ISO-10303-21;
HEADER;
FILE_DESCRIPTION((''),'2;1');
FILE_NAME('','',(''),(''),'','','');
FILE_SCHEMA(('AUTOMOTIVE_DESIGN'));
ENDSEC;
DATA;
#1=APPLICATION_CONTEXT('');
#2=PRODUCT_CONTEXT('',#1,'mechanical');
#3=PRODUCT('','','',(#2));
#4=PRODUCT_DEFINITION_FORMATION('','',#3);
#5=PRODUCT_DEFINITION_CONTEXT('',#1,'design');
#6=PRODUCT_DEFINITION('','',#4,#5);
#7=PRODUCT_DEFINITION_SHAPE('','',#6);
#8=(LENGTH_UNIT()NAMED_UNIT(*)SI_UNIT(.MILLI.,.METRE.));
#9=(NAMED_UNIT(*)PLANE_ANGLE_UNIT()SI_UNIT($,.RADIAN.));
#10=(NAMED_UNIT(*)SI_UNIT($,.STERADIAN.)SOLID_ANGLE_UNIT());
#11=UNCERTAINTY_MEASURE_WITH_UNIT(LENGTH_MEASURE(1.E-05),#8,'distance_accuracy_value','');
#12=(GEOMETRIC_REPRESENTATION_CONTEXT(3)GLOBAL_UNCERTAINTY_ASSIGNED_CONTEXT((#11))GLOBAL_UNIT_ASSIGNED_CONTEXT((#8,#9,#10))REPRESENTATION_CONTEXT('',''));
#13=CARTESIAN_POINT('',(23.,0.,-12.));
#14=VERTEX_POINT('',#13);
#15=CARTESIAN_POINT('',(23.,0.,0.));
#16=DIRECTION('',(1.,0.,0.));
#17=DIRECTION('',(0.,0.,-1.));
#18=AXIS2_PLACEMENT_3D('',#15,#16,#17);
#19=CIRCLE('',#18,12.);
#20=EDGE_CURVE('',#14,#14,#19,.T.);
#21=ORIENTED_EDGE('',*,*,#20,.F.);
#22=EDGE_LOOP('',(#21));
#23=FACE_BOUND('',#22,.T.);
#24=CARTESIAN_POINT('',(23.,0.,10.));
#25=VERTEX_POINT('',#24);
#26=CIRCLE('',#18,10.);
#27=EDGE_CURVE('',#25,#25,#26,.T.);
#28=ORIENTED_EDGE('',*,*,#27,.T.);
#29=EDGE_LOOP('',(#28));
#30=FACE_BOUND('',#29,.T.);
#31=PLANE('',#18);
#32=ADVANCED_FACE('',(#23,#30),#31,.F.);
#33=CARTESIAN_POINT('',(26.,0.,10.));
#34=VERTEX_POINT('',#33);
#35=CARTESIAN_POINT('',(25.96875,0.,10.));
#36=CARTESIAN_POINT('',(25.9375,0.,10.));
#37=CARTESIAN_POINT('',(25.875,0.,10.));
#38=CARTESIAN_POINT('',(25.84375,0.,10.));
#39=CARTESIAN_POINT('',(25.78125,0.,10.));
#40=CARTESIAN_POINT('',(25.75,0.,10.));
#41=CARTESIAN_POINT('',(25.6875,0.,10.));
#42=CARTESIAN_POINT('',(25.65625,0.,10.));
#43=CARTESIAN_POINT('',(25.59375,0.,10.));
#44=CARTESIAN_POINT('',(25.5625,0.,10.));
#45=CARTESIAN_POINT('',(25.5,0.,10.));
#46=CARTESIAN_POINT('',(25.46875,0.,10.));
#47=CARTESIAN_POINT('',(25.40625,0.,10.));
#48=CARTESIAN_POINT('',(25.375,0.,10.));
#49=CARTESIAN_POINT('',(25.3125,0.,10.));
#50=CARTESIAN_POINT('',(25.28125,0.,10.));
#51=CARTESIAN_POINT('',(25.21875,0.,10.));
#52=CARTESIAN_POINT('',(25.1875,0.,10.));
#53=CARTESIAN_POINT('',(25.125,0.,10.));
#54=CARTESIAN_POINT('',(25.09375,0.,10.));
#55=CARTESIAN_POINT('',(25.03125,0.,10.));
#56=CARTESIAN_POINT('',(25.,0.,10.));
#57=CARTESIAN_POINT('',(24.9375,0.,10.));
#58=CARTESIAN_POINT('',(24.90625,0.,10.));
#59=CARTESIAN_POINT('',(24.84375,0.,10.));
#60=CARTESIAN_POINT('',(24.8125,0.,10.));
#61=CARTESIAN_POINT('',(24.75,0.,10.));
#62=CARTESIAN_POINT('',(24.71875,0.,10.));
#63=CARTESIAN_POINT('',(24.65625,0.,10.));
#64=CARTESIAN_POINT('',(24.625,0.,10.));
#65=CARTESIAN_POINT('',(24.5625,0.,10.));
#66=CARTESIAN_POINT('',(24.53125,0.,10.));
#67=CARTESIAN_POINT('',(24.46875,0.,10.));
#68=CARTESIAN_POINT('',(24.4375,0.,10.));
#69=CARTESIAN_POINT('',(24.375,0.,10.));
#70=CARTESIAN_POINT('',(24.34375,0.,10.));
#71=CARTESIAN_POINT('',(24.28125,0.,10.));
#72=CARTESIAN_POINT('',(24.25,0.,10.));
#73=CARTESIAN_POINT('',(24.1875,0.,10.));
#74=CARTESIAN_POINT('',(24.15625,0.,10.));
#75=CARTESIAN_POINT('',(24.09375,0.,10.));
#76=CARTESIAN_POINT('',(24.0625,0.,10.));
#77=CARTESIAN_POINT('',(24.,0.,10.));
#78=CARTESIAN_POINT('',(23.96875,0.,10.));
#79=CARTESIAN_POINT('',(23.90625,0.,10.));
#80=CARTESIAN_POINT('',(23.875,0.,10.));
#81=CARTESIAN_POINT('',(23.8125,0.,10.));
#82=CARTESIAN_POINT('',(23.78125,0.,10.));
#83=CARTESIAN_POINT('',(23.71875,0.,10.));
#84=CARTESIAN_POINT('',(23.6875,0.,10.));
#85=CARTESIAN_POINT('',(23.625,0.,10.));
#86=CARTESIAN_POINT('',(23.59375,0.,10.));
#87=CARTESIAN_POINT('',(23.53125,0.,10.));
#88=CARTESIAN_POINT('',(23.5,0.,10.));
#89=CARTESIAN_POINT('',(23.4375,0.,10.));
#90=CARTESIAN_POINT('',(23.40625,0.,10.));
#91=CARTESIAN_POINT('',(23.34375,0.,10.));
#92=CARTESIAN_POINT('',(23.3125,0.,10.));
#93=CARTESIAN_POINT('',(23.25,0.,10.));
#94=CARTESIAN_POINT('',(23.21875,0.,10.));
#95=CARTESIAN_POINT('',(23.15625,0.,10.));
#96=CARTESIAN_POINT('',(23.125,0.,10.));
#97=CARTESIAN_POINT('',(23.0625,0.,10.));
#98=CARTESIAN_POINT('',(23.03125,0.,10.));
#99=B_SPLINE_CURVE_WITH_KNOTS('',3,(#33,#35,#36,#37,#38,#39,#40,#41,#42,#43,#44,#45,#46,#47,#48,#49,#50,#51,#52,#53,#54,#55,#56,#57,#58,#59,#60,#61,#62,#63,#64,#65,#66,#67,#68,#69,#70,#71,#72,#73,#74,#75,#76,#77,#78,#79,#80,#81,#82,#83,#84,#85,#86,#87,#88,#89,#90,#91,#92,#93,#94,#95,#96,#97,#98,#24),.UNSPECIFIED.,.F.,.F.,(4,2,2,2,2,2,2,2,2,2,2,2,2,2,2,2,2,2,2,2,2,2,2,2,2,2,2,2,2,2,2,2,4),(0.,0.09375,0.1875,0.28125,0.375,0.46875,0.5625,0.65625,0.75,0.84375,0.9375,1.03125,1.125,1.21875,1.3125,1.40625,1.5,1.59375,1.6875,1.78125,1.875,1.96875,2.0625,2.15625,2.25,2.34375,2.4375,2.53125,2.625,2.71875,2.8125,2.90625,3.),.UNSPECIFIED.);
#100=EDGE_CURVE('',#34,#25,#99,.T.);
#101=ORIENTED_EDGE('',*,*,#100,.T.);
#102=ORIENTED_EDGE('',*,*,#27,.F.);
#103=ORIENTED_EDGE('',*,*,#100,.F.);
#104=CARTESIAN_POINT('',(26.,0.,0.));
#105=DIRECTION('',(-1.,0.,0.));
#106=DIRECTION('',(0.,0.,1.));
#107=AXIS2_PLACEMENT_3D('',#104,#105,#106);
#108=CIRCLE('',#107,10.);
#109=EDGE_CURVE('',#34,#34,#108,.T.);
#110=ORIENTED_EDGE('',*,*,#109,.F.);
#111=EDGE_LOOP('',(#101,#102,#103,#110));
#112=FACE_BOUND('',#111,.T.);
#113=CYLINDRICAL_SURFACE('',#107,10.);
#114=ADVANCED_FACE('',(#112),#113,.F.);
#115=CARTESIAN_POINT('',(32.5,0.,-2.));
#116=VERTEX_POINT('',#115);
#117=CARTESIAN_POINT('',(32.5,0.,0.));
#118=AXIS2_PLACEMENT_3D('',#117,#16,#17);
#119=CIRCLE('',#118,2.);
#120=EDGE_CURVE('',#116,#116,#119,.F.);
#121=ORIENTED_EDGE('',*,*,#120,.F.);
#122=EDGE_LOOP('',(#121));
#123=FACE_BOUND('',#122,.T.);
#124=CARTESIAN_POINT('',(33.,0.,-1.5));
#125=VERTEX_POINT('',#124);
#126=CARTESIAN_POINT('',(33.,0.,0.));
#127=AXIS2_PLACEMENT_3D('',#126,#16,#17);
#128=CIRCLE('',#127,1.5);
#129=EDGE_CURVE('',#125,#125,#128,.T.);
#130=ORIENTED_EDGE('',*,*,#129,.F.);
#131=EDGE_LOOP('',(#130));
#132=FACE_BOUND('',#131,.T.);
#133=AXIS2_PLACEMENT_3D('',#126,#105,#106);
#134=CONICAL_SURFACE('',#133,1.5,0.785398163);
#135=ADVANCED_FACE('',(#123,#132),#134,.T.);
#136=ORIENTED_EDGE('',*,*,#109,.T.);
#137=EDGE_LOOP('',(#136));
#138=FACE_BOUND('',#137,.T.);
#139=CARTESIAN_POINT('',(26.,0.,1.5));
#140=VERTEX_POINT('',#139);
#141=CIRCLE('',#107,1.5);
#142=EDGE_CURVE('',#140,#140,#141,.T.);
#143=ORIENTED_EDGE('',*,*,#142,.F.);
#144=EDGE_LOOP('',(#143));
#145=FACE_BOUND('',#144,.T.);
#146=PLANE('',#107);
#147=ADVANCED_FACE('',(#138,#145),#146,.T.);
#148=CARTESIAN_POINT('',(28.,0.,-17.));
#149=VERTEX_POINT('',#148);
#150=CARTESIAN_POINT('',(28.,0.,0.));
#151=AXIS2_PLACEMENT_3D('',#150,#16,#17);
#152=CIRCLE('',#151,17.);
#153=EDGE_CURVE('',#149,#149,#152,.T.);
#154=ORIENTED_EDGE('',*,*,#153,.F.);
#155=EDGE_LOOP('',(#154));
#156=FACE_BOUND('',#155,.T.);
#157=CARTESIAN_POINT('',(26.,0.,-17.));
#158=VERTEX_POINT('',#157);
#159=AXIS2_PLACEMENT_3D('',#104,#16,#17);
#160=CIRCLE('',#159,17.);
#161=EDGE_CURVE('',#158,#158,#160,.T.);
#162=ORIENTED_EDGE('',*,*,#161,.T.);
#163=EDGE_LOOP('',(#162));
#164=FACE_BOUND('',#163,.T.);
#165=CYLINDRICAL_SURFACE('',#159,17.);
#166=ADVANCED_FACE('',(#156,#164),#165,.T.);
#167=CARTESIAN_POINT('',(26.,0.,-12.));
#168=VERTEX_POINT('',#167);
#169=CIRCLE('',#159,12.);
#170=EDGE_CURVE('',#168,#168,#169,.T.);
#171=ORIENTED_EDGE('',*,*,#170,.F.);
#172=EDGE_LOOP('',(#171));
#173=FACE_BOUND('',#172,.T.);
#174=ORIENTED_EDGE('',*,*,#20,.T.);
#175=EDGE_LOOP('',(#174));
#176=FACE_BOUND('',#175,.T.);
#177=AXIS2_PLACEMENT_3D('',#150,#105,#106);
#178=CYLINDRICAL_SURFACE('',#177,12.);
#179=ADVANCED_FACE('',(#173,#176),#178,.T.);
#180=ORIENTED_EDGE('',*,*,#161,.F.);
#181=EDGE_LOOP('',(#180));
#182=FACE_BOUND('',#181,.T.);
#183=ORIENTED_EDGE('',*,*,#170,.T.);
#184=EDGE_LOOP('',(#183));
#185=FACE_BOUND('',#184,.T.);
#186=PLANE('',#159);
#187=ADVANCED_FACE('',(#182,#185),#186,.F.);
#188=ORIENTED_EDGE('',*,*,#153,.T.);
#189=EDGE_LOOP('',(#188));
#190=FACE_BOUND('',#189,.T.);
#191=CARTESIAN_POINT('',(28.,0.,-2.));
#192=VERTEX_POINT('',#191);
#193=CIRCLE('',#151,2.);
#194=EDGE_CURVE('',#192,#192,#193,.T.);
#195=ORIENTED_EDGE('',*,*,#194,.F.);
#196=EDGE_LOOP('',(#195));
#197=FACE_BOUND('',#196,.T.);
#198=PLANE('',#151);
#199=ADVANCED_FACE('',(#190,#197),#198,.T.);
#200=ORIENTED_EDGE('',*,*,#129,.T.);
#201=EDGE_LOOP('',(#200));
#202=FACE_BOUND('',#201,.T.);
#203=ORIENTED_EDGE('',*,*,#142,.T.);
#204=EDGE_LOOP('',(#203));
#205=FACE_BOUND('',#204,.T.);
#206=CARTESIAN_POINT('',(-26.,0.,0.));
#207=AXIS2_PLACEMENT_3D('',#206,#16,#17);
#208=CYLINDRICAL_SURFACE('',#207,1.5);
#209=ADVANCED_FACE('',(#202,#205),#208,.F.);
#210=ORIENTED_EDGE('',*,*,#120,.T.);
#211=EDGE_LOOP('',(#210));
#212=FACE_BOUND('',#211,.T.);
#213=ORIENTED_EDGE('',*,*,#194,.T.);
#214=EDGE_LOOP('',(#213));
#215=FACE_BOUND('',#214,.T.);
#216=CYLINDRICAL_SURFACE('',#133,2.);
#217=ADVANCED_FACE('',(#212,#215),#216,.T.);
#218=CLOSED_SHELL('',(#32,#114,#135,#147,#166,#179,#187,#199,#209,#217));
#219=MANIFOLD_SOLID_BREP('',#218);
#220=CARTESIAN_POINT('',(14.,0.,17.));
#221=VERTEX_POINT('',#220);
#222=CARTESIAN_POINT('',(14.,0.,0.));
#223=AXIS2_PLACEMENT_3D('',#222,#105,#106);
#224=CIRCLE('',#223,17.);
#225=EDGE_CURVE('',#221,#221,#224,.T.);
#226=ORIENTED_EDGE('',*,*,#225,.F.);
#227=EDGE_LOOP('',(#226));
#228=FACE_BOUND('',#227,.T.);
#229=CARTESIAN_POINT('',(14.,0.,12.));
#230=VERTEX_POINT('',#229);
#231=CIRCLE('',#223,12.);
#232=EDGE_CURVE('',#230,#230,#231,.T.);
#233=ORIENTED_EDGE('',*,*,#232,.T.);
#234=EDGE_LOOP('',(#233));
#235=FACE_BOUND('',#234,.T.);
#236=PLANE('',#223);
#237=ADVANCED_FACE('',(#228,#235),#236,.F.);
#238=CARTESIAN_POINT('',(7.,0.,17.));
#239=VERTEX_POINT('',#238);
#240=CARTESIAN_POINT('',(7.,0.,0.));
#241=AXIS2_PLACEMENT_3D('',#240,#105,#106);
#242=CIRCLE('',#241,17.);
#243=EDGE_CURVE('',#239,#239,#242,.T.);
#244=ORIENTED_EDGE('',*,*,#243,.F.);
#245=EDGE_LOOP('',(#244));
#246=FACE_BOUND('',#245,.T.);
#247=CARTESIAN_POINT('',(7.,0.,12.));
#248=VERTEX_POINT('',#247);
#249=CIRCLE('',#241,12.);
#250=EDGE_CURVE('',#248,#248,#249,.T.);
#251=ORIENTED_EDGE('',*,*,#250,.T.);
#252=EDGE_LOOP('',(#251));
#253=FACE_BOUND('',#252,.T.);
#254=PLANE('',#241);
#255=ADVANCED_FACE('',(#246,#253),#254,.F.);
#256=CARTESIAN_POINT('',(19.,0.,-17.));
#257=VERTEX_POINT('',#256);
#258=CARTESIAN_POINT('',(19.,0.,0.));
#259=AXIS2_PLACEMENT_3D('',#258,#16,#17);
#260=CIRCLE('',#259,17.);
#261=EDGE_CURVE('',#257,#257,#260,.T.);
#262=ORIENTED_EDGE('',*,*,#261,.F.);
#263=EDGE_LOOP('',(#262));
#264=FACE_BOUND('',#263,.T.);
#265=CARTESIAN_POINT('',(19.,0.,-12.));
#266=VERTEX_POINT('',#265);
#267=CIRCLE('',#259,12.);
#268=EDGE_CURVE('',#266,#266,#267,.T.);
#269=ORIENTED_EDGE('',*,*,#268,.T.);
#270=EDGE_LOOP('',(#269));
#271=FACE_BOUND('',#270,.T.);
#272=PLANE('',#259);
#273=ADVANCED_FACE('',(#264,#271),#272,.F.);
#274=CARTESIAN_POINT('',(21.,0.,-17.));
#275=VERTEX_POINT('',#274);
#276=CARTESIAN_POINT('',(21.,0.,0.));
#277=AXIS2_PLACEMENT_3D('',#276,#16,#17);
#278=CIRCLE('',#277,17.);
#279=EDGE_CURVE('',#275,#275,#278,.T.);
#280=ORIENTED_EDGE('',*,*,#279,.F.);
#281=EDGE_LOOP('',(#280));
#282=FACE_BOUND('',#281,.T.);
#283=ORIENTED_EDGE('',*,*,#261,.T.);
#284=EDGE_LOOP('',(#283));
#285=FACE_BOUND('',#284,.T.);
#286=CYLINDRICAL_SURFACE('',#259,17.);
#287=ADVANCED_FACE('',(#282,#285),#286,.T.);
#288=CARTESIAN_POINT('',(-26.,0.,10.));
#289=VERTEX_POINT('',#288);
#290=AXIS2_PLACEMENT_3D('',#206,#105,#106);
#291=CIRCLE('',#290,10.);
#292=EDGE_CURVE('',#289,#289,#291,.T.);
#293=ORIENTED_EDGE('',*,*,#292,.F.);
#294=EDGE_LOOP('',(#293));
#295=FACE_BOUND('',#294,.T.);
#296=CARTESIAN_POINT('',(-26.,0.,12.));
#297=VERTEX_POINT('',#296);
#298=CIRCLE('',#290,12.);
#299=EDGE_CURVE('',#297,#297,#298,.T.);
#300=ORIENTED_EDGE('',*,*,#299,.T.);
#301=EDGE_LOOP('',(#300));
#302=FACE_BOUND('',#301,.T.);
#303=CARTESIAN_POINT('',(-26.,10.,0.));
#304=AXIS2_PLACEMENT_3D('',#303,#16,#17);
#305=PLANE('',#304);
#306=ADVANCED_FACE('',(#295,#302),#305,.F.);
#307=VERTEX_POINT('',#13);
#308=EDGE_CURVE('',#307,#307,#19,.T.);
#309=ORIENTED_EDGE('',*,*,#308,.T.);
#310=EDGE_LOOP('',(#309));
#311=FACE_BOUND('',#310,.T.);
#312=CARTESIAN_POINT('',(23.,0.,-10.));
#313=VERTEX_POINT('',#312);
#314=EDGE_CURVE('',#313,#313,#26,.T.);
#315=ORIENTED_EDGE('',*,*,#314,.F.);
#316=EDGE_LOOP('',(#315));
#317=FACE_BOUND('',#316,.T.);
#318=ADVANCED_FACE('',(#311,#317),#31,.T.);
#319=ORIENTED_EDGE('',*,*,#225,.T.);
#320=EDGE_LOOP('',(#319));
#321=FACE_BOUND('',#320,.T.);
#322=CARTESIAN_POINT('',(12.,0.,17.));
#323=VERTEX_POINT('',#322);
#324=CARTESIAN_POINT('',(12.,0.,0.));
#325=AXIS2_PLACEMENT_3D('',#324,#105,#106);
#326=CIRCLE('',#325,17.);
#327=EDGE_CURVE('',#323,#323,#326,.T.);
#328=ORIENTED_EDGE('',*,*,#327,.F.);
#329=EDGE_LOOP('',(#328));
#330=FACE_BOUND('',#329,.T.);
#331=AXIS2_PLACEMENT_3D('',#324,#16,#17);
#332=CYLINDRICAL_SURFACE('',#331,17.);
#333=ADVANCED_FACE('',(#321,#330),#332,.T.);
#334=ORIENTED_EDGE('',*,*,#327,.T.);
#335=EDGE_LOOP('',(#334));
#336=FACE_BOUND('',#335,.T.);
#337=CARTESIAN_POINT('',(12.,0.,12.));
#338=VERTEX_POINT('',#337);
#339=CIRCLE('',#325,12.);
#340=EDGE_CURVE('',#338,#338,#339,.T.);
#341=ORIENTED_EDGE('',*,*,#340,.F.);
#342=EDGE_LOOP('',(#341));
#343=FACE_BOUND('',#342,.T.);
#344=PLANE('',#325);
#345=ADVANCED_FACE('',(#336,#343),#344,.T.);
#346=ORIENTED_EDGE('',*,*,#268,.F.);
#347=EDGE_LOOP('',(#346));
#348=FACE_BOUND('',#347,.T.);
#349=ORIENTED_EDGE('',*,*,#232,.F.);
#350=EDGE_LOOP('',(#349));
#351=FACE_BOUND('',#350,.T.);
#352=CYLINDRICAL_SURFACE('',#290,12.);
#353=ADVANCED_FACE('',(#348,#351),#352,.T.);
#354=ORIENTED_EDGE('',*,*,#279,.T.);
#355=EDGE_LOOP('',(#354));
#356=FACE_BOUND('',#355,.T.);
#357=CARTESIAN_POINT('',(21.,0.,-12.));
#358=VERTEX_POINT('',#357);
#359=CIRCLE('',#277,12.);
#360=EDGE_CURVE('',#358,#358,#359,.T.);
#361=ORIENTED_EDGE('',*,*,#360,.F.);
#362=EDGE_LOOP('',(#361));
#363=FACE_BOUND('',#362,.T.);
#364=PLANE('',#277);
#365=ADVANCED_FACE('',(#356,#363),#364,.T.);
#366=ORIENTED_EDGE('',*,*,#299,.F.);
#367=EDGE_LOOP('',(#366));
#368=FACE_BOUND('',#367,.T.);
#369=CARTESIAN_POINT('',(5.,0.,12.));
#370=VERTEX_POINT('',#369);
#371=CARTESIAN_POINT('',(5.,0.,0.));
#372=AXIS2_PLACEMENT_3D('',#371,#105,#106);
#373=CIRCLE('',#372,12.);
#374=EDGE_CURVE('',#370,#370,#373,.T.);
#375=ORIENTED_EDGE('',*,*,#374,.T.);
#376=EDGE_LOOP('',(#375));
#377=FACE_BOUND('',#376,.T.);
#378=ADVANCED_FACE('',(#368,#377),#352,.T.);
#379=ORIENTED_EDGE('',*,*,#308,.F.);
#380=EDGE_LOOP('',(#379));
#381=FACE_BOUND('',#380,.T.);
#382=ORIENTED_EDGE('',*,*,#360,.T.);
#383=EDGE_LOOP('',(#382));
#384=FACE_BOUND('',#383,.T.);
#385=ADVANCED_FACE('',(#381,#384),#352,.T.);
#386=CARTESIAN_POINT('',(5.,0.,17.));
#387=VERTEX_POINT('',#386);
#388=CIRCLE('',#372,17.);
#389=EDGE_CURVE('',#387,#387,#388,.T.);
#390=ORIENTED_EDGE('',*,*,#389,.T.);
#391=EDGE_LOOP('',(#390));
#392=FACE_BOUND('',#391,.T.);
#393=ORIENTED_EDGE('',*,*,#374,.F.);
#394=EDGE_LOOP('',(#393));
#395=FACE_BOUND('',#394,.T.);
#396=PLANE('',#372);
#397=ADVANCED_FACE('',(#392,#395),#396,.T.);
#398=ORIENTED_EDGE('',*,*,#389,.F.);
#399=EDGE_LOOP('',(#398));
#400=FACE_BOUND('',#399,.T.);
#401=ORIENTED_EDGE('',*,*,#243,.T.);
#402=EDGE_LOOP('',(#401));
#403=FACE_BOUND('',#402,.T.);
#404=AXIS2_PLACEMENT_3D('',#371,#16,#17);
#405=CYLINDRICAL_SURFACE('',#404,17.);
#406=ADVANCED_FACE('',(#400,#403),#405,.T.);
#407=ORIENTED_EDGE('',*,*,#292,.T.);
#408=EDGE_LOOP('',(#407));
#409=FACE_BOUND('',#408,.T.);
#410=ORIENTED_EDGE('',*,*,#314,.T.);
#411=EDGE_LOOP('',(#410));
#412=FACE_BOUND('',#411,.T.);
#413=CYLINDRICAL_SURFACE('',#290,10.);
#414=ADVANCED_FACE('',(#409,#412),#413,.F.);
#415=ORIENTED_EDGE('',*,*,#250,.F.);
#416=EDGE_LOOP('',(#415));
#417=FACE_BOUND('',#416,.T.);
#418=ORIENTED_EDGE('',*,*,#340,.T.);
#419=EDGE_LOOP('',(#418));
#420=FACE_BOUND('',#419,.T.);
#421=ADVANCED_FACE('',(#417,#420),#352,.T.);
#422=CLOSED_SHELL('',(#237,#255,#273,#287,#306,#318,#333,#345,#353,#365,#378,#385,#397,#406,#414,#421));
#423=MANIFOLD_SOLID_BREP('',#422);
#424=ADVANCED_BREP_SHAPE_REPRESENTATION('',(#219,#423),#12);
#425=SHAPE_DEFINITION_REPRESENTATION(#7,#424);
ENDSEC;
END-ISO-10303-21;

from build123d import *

# Parameters (mm, degrees)
SKETCH_1_W          = 46
SKETCH_1_H          = 2
SKETCH_8_R          = 12
SKETCH_8_R_2        = 10
EXTRUDE_3_DEPTH     = 3
SKETCH_9_R          = 12
EXTRUDE_5_DEPTH     = 5
SKETCH_11_R         = 10
CUT_EXTRUDE_7_DEPTH = 52
SKETCH_12_R         = 1.5
CUT_EXTRUDE_8_DEPTH = 57.603886792
EXTRUDE_START       = -2
SKETCH_14_R         = 17
SKETCH_14_R_2       = 12
EXTRUDE_6_DEPTH     = 2
EXTRUDE_START_2     = -9
SKETCH_15_R         = 17
SKETCH_15_R_2       = 12
EXTRUDE_7_DEPTH     = 2
EXTRUDE_START_3     = 7
SKETCH_20_R         = 17
SKETCH_20_R_2       = 12
EXTRUDE_11_DEPTH    = 2
SKETCH_21_R         = 17
SKETCH_21_R_2       = 10
EXTRUDE_12_DEPTH    = 2
SKETCH_22_R         = 2
SKETCH_22_R_2       = 1.5
EXTRUDE_13_DEPTH    = 5
CHAMFER_1_SIZE      = 0.5


with BuildPart() as part:
    # 草图1 → 旋转1 (revolve)
    with BuildSketch(Plane.XY, mode=Mode.PRIVATE) as revolve_1_sk:
        with Locations((-3, 11)):
            Rectangle(SKETCH_1_W, SKETCH_1_H)
    revolve(revolve_1_sk.sketch.rotate(Axis((-26, 0, 0), (1, 0, 0)), 90), axis=Axis((-26, 0, 0), (1, 0, 0)))

    # 草图8 → 凸台-拉伸3 (add)
    with BuildSketch(Plane(origin=(20, 0, 0), x_dir=(0, 0, -1), z_dir=(1, 0, 0))):
        with Locations(Location((0, 0, 0), (0, 0, 180))):
            Circle(SKETCH_8_R)
        with Locations(Location((0, 0, 0), (0, 0, 180))):
            Circle(SKETCH_8_R_2, mode=Mode.SUBTRACT)
    extrude(amount=EXTRUDE_3_DEPTH)

    # 草图15 → 凸台-拉伸7 (add)
    with BuildSketch(Plane(origin=(28, 0, 0), x_dir=(0, 0, -1), z_dir=(1, 0, 0)).offset(EXTRUDE_START_2)):
        Circle(SKETCH_15_R)
        Circle(SKETCH_15_R_2, mode=Mode.SUBTRACT)
    extrude(amount=EXTRUDE_7_DEPTH)

    # 草图20 → 凸台-拉伸11 (add)
    with BuildSketch(Plane.ZY.offset(-19).offset(EXTRUDE_START_3)):
        with Locations(Location((0, 0, 0), (0, 0, 180))):
            Circle(SKETCH_20_R)
        with Locations(Location((0, 0, 0), (0, 0, 180))):
            Circle(SKETCH_20_R_2, mode=Mode.SUBTRACT)
    extrude(amount=-EXTRUDE_11_DEPTH)

    # 草图21 → 凸台-拉伸12 (add)
    with BuildSketch(Plane.ZY.offset(-12).offset(EXTRUDE_START_3)):
        with Locations(Location((0, 0, 0), (0, 0, 180))):
            Circle(SKETCH_21_R)
        Circle(SKETCH_21_R_2, mode=Mode.SUBTRACT)
    extrude(amount=-EXTRUDE_12_DEPTH)


with BuildPart() as body_2:
    # 草图9 → 凸台-拉伸5 (new body)
    with BuildSketch(Plane(origin=(23, 0, 0), x_dir=(0, 0, -1), z_dir=(1, 0, 0))):
        Circle(SKETCH_9_R)
    extrude(amount=EXTRUDE_5_DEPTH)

    # 草图11 → 切除-拉伸7 (cut)
    with BuildSketch(Plane.ZY.offset(26)):
        Circle(SKETCH_11_R)
    extrude(amount=-CUT_EXTRUDE_7_DEPTH, mode=Mode.SUBTRACT)

    # 草图12 → 切除-拉伸8 (cut, through all)
    with BuildSketch(Plane(origin=(28, 0, 0), x_dir=(0, 0, -1), z_dir=(1, 0, 0))):
        Circle(SKETCH_12_R)
    extrude(amount=-CUT_EXTRUDE_8_DEPTH, mode=Mode.SUBTRACT)

    # 草图14 → 凸台-拉伸6 (add)
    with BuildSketch(Plane(origin=(28, 0, 0), x_dir=(0, 0, -1), z_dir=(1, 0, 0)).offset(EXTRUDE_START)):
        Circle(SKETCH_14_R)
        Circle(SKETCH_14_R_2, mode=Mode.SUBTRACT)
    extrude(amount=EXTRUDE_6_DEPTH)

    # 草图22 → 凸台-拉伸13 (add)
    with BuildSketch(Plane(origin=(28, 0, 0), x_dir=(0, 0, -1), z_dir=(1, 0, 0))):
        Circle(SKETCH_22_R)
        Circle(SKETCH_22_R_2, mode=Mode.SUBTRACT)
    extrude(amount=EXTRUDE_13_DEPTH)

    # 倒角1
    chamfer_1_edges = [body_2.edges().sort_by_distance(p)[0] for p in [
        (33, 0, 2),
    ]]
    chamfer(chamfer_1_edges, length=CHAMFER_1_SIZE - 0.0001)  # a hair under: the kernel refuses the full size


solid = Compound([part.part, body_2.part])
